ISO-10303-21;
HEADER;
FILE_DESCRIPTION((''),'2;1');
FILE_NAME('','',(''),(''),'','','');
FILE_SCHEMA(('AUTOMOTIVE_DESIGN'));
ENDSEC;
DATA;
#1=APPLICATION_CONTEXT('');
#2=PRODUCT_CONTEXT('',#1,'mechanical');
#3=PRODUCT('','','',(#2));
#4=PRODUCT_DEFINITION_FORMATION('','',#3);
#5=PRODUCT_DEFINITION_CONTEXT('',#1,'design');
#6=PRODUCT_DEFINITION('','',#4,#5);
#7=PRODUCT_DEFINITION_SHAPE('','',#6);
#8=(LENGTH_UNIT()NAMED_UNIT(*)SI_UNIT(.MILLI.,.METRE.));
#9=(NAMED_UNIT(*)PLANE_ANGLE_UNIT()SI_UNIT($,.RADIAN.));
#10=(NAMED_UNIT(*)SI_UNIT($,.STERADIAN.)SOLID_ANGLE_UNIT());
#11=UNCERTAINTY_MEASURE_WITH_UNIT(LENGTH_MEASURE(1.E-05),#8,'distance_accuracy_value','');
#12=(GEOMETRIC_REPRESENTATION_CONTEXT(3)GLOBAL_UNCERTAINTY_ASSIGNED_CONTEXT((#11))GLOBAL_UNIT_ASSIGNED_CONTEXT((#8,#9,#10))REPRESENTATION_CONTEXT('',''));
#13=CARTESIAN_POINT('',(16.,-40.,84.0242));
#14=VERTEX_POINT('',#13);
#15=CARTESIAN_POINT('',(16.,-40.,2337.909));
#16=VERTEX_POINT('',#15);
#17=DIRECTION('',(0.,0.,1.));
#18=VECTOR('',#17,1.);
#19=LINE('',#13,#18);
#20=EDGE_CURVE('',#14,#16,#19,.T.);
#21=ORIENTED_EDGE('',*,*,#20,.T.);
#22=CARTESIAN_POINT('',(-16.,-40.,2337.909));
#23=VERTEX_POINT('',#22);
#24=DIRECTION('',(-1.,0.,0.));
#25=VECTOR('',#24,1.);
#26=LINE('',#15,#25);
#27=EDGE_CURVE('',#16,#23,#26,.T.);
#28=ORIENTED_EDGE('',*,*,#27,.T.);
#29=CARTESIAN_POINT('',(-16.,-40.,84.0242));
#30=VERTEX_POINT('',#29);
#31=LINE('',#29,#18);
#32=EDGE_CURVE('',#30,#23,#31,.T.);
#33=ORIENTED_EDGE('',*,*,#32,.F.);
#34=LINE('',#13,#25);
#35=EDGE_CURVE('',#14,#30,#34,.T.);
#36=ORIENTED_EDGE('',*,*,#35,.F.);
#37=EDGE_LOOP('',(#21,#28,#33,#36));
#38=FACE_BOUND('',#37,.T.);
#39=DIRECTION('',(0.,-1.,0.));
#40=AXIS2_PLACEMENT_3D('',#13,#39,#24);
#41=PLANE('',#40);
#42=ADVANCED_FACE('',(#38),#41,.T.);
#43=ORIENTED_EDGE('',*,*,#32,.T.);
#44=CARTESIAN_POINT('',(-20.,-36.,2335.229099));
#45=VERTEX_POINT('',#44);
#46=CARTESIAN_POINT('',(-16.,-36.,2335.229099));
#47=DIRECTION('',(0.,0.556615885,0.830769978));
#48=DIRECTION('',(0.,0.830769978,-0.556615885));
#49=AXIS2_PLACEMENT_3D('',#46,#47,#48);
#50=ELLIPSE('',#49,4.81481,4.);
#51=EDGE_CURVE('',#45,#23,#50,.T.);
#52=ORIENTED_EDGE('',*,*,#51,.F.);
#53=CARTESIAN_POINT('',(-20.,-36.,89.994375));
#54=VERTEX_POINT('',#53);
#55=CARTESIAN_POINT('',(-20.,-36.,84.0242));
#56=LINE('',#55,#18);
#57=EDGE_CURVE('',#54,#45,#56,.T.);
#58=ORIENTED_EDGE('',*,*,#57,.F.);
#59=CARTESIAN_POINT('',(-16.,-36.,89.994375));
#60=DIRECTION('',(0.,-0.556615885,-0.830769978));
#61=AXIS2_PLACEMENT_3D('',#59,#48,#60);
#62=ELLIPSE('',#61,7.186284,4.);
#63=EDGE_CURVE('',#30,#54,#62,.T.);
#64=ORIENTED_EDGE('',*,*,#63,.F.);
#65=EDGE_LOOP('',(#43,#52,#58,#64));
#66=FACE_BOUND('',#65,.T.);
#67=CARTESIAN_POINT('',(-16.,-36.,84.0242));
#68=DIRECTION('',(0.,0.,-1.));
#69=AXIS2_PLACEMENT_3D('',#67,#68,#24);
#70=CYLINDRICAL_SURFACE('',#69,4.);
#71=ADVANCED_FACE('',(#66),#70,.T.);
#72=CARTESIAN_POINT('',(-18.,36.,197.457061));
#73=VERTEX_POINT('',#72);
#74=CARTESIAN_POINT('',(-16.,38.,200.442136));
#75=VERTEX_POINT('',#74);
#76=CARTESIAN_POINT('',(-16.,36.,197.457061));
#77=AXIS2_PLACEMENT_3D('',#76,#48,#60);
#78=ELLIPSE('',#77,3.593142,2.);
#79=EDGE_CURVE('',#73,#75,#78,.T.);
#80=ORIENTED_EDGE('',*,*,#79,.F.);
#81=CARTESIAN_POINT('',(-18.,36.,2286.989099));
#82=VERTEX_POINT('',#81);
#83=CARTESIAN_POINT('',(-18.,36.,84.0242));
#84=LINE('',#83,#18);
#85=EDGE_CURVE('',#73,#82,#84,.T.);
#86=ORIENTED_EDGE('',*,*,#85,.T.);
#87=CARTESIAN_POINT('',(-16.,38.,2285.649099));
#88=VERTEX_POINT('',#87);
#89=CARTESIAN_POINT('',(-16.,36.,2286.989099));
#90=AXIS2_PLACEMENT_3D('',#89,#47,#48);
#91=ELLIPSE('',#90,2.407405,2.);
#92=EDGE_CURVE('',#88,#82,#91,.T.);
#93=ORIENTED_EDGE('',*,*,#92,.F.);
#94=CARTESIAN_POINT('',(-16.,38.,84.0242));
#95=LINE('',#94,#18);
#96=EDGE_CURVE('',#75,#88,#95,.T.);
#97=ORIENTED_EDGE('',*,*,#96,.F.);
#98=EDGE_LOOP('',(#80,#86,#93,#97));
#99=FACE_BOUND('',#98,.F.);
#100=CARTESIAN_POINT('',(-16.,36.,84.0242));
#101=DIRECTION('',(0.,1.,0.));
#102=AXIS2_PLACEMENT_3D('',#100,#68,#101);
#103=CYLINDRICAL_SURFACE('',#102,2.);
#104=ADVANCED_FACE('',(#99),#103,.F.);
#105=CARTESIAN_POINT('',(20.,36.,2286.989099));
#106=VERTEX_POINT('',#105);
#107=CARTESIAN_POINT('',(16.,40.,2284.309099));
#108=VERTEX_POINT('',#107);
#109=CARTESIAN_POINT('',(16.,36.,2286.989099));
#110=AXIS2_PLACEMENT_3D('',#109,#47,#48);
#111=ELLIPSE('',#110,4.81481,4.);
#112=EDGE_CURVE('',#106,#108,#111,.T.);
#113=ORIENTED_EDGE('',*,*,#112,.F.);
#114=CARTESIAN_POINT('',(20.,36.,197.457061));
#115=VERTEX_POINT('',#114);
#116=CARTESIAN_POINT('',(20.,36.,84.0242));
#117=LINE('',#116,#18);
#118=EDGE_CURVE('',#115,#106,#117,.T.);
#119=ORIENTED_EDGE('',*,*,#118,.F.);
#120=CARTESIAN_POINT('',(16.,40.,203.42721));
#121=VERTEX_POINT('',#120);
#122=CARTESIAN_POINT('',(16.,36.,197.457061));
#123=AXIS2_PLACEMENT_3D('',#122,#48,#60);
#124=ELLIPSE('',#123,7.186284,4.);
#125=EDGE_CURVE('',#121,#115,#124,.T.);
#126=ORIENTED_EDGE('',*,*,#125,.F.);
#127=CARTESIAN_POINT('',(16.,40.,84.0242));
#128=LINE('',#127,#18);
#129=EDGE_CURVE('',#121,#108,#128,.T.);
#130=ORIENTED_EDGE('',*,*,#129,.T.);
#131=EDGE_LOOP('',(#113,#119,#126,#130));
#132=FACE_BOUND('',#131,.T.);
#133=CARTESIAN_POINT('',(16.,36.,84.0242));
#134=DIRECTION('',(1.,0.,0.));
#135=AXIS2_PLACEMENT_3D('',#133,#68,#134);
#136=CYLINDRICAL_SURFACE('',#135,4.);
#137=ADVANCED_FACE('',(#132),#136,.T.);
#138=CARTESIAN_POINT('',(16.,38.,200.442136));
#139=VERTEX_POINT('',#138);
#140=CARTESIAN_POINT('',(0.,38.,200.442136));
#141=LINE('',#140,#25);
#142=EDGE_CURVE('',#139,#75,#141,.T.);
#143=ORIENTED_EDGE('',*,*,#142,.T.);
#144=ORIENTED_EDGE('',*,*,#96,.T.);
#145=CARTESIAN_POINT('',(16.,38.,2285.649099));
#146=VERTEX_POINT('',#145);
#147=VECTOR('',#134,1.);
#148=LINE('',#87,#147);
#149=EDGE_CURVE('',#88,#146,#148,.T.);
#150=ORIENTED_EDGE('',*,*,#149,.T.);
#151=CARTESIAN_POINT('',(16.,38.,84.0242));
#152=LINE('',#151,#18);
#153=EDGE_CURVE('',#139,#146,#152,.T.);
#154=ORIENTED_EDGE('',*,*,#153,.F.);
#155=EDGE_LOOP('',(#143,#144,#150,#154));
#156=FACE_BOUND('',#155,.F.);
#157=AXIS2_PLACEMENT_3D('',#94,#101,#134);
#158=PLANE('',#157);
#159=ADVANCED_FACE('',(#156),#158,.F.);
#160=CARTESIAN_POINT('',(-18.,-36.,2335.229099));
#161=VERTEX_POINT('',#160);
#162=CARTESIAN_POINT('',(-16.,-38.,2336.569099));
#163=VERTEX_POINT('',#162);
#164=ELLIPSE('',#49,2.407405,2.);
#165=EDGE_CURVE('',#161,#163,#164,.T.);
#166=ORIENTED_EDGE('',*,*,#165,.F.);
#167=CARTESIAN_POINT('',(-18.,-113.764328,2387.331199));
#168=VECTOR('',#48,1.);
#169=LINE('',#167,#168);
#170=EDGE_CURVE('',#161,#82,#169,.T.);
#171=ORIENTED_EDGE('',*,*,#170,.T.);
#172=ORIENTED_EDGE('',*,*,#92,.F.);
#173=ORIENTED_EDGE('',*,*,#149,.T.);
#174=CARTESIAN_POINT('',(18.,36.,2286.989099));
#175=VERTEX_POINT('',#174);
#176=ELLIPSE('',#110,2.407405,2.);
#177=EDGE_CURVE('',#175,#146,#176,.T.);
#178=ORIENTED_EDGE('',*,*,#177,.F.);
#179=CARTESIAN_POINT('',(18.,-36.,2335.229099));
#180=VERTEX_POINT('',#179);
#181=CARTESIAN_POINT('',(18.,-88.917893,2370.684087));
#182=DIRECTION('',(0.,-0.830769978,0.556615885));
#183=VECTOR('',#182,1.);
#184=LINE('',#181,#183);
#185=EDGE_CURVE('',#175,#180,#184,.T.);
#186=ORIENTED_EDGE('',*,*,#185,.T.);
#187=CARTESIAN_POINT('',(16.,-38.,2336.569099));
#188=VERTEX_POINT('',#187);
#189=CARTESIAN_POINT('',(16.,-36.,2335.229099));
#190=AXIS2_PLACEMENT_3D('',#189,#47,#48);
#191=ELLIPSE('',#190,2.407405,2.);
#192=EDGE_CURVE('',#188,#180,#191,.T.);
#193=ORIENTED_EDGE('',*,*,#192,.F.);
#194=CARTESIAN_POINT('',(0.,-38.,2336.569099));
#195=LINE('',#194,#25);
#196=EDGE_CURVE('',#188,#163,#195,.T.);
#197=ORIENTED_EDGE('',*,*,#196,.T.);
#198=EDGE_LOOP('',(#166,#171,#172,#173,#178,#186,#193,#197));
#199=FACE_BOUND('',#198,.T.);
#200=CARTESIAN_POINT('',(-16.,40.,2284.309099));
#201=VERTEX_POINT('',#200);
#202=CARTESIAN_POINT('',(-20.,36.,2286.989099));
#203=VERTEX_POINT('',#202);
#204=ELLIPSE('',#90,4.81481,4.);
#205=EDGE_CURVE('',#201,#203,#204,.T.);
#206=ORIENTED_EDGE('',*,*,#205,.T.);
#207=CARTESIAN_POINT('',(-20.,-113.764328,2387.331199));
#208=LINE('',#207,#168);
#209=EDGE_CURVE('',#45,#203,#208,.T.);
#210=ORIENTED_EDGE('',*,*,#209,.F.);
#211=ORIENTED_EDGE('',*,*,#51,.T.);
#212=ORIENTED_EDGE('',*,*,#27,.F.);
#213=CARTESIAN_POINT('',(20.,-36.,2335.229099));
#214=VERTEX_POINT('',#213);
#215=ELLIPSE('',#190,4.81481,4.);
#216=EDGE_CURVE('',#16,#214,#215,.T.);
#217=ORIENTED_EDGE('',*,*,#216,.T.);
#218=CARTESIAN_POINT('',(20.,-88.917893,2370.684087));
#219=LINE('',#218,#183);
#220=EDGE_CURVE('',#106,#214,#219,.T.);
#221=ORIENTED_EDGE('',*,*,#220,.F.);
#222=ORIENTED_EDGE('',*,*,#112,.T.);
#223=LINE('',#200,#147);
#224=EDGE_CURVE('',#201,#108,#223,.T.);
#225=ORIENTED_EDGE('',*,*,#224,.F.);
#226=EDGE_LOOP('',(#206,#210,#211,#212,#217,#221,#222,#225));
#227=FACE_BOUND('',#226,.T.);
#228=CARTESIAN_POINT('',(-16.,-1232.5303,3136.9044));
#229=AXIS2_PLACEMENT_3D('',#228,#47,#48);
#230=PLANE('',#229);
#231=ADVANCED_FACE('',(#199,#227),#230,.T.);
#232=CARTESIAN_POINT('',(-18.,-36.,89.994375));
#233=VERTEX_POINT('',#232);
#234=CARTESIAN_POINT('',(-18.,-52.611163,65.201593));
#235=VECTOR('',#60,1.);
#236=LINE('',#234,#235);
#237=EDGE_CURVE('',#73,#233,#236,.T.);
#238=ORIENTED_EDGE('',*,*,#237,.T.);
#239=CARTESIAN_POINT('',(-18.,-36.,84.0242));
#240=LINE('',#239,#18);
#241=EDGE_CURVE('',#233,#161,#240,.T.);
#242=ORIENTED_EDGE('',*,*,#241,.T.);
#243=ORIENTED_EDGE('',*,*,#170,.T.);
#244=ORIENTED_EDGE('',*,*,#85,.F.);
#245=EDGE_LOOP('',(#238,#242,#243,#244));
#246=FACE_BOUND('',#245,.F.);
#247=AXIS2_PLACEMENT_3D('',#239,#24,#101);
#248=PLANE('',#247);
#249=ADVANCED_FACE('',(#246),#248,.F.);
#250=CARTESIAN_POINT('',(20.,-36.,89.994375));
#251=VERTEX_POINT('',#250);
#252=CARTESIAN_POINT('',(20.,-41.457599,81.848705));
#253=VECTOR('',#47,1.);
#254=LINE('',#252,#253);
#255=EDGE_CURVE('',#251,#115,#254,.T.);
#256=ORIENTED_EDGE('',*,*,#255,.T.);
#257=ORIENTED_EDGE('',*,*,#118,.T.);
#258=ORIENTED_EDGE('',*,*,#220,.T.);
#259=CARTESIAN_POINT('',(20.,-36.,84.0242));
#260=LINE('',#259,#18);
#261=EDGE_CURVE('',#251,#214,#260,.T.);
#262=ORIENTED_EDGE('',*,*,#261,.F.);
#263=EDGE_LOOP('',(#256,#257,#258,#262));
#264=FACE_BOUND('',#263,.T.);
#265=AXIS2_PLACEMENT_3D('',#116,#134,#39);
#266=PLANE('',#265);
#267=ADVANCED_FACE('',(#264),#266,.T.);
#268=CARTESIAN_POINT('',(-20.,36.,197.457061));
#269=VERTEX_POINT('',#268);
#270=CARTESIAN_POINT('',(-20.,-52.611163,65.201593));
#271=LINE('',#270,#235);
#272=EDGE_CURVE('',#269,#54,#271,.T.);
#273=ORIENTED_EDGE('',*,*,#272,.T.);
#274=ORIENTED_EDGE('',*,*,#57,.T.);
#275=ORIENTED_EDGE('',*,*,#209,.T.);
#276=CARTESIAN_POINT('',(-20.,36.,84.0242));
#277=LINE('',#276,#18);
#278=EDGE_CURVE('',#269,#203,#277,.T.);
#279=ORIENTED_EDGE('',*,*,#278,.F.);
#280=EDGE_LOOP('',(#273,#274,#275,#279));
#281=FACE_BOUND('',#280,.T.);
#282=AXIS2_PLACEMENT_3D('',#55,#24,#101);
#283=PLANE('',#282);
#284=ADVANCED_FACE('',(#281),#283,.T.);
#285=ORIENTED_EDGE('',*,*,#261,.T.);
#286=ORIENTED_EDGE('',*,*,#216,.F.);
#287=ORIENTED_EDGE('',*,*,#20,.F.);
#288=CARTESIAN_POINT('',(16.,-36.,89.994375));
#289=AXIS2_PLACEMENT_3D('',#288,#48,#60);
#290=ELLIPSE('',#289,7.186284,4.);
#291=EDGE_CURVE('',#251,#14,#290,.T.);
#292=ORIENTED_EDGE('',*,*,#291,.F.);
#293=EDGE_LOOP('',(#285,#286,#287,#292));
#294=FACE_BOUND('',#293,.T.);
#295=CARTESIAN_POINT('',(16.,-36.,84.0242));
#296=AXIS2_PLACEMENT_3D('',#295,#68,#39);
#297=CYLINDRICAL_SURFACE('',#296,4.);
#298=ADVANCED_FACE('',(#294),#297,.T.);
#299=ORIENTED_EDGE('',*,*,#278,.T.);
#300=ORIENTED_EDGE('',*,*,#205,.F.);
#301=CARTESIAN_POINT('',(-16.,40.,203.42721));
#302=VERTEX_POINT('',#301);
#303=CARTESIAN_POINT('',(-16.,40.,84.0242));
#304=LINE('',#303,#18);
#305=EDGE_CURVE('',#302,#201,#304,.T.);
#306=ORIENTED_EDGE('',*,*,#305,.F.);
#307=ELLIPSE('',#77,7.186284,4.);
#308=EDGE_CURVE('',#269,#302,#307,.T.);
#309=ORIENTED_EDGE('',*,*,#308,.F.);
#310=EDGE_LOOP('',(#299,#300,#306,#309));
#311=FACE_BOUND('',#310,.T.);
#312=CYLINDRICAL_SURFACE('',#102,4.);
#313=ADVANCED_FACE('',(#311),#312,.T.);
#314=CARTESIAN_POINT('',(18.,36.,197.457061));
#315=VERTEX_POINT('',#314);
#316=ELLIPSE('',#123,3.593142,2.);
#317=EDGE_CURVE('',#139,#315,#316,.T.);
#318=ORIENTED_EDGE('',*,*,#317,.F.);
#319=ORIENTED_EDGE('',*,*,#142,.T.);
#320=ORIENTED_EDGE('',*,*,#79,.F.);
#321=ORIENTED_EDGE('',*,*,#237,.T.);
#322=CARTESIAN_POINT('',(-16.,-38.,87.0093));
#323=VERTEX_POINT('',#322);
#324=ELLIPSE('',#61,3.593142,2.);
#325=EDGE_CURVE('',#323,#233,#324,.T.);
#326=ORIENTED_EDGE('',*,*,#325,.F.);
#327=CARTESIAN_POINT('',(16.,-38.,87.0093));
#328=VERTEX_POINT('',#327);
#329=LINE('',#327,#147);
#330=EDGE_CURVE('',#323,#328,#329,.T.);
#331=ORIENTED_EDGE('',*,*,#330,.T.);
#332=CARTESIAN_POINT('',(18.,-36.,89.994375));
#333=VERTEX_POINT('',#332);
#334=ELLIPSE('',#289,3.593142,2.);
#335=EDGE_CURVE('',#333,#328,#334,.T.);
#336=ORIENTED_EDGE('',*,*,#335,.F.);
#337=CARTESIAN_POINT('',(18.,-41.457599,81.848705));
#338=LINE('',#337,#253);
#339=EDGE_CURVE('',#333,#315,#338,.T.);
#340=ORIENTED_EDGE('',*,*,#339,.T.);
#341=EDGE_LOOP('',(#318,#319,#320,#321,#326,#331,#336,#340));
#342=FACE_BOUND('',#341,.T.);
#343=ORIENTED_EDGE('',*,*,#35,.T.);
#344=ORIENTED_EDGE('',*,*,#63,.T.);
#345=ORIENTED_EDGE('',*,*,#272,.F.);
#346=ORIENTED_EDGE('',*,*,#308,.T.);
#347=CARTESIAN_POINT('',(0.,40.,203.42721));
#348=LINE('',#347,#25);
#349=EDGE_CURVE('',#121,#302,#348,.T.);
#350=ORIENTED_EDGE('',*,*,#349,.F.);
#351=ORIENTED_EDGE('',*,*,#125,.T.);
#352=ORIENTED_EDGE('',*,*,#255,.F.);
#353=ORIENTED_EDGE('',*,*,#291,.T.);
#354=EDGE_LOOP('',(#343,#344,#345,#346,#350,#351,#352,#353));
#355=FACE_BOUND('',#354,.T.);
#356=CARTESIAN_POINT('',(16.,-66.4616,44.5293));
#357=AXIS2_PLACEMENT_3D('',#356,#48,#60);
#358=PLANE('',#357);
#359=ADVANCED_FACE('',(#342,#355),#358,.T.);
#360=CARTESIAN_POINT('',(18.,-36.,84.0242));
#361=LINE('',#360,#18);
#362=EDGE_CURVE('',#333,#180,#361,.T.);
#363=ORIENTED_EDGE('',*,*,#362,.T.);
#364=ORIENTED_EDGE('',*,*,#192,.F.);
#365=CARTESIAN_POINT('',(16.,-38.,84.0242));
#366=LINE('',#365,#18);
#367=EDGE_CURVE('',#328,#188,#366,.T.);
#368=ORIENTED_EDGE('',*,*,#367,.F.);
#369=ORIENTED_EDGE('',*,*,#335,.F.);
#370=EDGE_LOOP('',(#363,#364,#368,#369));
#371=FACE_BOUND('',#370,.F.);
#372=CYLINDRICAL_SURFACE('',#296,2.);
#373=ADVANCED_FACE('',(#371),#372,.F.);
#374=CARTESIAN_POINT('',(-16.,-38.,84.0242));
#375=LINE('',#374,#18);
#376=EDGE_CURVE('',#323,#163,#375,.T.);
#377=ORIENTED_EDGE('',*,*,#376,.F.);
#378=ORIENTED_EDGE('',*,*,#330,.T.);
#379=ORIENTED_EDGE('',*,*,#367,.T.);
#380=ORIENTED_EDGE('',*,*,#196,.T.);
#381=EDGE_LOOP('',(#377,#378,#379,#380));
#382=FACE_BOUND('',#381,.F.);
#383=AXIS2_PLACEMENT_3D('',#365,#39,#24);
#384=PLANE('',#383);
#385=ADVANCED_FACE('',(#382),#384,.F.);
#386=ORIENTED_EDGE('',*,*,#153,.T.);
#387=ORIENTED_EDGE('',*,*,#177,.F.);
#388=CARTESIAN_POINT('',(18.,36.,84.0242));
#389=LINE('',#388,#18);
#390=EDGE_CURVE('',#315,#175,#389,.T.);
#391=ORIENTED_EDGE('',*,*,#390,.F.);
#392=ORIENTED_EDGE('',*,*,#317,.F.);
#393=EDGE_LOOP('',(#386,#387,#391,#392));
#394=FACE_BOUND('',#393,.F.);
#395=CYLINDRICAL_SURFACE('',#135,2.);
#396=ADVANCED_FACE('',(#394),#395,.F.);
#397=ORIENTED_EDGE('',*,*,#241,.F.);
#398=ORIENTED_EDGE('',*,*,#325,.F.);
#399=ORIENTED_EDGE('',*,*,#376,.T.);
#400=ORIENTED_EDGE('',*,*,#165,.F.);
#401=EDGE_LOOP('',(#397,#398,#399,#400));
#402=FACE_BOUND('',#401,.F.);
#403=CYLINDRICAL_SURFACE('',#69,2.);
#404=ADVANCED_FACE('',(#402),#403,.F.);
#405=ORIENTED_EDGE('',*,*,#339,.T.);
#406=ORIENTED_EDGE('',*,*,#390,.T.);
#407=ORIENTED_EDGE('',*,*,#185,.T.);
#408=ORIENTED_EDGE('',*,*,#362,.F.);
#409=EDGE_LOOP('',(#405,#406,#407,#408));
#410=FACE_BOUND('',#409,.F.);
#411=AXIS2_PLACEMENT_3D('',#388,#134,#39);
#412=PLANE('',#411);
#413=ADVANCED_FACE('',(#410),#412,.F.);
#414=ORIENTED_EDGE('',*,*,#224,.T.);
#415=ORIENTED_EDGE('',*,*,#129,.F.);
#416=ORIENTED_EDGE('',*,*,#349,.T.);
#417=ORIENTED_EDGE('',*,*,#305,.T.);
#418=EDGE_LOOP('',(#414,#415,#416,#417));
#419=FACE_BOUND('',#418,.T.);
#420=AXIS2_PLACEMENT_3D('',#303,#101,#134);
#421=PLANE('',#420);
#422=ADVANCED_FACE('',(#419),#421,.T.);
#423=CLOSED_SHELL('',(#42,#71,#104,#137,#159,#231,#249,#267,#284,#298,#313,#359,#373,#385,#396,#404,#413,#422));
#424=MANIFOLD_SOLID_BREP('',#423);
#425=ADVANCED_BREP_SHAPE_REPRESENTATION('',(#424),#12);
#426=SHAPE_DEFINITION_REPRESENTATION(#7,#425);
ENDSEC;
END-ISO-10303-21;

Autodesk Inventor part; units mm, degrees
ref_plane "Start Plane" through (0, 0, 84.0242) normal (0, 0, 1) x (1, 0, 0)
ref_plane "End Plane" through (0, 0, 2337.909) normal (0, 0, 1) x (1, 0, 0)
sketch "Sketch" plane through (0, 0, 0) normal (0, 0, 1) x (1, 0, 0)
  line L0 (-20, -36) -> (-20, 36)
  line L1 (-16, 40) -> (16, 40)
  line L2 (20, 36) -> (20, -36)
  line L3 (16, -40) -> (-16, -40)
  arc A0 (-20, -36) -> (-16, -40) centre (-16, -36) ccw
  arc A1 (20, 36) -> (16, 40) centre (16, 36) ccw
  arc A2 (-16, 40) -> (-20, 36) centre (-16, 36) ccw
  arc A3 (16, -40) -> (20, -36) centre (16, -36) ccw
  arc A4 (-16, 38) -> (-18, 36) centre (-16, 36) ccw
  line L4 (-16, 38) -> (16, 38)
  arc A5 (18, 36) -> (16, 38) centre (16, 36) ccw
  line L5 (18, 36) -> (18, -36)
  arc A6 (16, -38) -> (18, -36) centre (16, -36) ccw
  line L6 (16, -38) -> (-16, -38)
  arc A7 (-18, -36) -> (-16, -38) centre (-16, -36) ccw
  line L7 (-18, -36) -> (-18, 36)
  line L8 (0, 57.1598) -> (0, -57.1598) construction
  line L9 (-29.1598, 0) -> (29.1598, 0) construction
  dimension "d7" = 4
  dimension "d9" = 40
  dimension "d11" = 80
  dimension "d12" = 2
  dimension "d15" = 20
  dimension "d16" = 40
extrude "Body" add sketch "Sketch" along normal up to surface (2253.8848 mm away) from surface at 84.0242
sketch "Sketch3" plane through (0, 0, 0) normal (0, 0, 1) x (1, 0, 0)
  line L0 (0, 0) -> (10, 0)
ref_plane "Work Plane3" through (0, 0, 0) normal (0, -1, 0) x (1, 0, 0)
ref_plane "Work Plane5" through (16, -66.4616, 44.5293) normal (0, 0.83077, -0.5566159) x (1, 0, 0)
split "Split2" plane through (16, -66.4616, 44.5293) removes the side toward (0, 0.83077, -0.5566159)
ref_plane "Work Plane6" through (-16, -1232.5303, 3136.9044) normal (0, 0.5566159, 0.83077) x (1, 0, 0)
split "Split3" plane through (-16, -1232.5303, 3136.9044) removes the side toward (0, 0.5566159, 0.83077)
sketch "Sketch4" plane through (0, 0, 0) normal (0, -1, 0) x (1, 0, 0)
  line L0 (-2, 84.0242) -> (12, 84.0242) projected
  line L1 (-2, 2337.909) -> (12, 2337.909) projected
  dimension "d18" = 2253.8848
equation "\"d7\" = G_IR"
equation "\"d9\" = G_W"
equation "\"d11\" = G_H"
equation "\"d12\" = G_T"
equation "\"d15\" = 0.5 * d9"
equation "\"d16\" = 0.5 * d11"
equation "\"d3\" = G_L"
equation "\"G_W\" = 40"
equation "\"G_H\" = 80"
equation "\"G_T\" = 2"
equation "\"G_IR\" = 4"
equation "\"G_L\" = d18"
equation "\"G_OFFSET_START\" = -84.02419"
equation "\"G_OFFSET_END\" = -69.49621"
equation "\"d13\" = -G_OFFSET_START"
equation "\"d14\" = G_OFFSET_END + B_L"
equation "\"B_L\" = 2407.40524"
properties part number "ISO 4019 - 80x40x2 - 2253,88" material "Steel, Mild"
